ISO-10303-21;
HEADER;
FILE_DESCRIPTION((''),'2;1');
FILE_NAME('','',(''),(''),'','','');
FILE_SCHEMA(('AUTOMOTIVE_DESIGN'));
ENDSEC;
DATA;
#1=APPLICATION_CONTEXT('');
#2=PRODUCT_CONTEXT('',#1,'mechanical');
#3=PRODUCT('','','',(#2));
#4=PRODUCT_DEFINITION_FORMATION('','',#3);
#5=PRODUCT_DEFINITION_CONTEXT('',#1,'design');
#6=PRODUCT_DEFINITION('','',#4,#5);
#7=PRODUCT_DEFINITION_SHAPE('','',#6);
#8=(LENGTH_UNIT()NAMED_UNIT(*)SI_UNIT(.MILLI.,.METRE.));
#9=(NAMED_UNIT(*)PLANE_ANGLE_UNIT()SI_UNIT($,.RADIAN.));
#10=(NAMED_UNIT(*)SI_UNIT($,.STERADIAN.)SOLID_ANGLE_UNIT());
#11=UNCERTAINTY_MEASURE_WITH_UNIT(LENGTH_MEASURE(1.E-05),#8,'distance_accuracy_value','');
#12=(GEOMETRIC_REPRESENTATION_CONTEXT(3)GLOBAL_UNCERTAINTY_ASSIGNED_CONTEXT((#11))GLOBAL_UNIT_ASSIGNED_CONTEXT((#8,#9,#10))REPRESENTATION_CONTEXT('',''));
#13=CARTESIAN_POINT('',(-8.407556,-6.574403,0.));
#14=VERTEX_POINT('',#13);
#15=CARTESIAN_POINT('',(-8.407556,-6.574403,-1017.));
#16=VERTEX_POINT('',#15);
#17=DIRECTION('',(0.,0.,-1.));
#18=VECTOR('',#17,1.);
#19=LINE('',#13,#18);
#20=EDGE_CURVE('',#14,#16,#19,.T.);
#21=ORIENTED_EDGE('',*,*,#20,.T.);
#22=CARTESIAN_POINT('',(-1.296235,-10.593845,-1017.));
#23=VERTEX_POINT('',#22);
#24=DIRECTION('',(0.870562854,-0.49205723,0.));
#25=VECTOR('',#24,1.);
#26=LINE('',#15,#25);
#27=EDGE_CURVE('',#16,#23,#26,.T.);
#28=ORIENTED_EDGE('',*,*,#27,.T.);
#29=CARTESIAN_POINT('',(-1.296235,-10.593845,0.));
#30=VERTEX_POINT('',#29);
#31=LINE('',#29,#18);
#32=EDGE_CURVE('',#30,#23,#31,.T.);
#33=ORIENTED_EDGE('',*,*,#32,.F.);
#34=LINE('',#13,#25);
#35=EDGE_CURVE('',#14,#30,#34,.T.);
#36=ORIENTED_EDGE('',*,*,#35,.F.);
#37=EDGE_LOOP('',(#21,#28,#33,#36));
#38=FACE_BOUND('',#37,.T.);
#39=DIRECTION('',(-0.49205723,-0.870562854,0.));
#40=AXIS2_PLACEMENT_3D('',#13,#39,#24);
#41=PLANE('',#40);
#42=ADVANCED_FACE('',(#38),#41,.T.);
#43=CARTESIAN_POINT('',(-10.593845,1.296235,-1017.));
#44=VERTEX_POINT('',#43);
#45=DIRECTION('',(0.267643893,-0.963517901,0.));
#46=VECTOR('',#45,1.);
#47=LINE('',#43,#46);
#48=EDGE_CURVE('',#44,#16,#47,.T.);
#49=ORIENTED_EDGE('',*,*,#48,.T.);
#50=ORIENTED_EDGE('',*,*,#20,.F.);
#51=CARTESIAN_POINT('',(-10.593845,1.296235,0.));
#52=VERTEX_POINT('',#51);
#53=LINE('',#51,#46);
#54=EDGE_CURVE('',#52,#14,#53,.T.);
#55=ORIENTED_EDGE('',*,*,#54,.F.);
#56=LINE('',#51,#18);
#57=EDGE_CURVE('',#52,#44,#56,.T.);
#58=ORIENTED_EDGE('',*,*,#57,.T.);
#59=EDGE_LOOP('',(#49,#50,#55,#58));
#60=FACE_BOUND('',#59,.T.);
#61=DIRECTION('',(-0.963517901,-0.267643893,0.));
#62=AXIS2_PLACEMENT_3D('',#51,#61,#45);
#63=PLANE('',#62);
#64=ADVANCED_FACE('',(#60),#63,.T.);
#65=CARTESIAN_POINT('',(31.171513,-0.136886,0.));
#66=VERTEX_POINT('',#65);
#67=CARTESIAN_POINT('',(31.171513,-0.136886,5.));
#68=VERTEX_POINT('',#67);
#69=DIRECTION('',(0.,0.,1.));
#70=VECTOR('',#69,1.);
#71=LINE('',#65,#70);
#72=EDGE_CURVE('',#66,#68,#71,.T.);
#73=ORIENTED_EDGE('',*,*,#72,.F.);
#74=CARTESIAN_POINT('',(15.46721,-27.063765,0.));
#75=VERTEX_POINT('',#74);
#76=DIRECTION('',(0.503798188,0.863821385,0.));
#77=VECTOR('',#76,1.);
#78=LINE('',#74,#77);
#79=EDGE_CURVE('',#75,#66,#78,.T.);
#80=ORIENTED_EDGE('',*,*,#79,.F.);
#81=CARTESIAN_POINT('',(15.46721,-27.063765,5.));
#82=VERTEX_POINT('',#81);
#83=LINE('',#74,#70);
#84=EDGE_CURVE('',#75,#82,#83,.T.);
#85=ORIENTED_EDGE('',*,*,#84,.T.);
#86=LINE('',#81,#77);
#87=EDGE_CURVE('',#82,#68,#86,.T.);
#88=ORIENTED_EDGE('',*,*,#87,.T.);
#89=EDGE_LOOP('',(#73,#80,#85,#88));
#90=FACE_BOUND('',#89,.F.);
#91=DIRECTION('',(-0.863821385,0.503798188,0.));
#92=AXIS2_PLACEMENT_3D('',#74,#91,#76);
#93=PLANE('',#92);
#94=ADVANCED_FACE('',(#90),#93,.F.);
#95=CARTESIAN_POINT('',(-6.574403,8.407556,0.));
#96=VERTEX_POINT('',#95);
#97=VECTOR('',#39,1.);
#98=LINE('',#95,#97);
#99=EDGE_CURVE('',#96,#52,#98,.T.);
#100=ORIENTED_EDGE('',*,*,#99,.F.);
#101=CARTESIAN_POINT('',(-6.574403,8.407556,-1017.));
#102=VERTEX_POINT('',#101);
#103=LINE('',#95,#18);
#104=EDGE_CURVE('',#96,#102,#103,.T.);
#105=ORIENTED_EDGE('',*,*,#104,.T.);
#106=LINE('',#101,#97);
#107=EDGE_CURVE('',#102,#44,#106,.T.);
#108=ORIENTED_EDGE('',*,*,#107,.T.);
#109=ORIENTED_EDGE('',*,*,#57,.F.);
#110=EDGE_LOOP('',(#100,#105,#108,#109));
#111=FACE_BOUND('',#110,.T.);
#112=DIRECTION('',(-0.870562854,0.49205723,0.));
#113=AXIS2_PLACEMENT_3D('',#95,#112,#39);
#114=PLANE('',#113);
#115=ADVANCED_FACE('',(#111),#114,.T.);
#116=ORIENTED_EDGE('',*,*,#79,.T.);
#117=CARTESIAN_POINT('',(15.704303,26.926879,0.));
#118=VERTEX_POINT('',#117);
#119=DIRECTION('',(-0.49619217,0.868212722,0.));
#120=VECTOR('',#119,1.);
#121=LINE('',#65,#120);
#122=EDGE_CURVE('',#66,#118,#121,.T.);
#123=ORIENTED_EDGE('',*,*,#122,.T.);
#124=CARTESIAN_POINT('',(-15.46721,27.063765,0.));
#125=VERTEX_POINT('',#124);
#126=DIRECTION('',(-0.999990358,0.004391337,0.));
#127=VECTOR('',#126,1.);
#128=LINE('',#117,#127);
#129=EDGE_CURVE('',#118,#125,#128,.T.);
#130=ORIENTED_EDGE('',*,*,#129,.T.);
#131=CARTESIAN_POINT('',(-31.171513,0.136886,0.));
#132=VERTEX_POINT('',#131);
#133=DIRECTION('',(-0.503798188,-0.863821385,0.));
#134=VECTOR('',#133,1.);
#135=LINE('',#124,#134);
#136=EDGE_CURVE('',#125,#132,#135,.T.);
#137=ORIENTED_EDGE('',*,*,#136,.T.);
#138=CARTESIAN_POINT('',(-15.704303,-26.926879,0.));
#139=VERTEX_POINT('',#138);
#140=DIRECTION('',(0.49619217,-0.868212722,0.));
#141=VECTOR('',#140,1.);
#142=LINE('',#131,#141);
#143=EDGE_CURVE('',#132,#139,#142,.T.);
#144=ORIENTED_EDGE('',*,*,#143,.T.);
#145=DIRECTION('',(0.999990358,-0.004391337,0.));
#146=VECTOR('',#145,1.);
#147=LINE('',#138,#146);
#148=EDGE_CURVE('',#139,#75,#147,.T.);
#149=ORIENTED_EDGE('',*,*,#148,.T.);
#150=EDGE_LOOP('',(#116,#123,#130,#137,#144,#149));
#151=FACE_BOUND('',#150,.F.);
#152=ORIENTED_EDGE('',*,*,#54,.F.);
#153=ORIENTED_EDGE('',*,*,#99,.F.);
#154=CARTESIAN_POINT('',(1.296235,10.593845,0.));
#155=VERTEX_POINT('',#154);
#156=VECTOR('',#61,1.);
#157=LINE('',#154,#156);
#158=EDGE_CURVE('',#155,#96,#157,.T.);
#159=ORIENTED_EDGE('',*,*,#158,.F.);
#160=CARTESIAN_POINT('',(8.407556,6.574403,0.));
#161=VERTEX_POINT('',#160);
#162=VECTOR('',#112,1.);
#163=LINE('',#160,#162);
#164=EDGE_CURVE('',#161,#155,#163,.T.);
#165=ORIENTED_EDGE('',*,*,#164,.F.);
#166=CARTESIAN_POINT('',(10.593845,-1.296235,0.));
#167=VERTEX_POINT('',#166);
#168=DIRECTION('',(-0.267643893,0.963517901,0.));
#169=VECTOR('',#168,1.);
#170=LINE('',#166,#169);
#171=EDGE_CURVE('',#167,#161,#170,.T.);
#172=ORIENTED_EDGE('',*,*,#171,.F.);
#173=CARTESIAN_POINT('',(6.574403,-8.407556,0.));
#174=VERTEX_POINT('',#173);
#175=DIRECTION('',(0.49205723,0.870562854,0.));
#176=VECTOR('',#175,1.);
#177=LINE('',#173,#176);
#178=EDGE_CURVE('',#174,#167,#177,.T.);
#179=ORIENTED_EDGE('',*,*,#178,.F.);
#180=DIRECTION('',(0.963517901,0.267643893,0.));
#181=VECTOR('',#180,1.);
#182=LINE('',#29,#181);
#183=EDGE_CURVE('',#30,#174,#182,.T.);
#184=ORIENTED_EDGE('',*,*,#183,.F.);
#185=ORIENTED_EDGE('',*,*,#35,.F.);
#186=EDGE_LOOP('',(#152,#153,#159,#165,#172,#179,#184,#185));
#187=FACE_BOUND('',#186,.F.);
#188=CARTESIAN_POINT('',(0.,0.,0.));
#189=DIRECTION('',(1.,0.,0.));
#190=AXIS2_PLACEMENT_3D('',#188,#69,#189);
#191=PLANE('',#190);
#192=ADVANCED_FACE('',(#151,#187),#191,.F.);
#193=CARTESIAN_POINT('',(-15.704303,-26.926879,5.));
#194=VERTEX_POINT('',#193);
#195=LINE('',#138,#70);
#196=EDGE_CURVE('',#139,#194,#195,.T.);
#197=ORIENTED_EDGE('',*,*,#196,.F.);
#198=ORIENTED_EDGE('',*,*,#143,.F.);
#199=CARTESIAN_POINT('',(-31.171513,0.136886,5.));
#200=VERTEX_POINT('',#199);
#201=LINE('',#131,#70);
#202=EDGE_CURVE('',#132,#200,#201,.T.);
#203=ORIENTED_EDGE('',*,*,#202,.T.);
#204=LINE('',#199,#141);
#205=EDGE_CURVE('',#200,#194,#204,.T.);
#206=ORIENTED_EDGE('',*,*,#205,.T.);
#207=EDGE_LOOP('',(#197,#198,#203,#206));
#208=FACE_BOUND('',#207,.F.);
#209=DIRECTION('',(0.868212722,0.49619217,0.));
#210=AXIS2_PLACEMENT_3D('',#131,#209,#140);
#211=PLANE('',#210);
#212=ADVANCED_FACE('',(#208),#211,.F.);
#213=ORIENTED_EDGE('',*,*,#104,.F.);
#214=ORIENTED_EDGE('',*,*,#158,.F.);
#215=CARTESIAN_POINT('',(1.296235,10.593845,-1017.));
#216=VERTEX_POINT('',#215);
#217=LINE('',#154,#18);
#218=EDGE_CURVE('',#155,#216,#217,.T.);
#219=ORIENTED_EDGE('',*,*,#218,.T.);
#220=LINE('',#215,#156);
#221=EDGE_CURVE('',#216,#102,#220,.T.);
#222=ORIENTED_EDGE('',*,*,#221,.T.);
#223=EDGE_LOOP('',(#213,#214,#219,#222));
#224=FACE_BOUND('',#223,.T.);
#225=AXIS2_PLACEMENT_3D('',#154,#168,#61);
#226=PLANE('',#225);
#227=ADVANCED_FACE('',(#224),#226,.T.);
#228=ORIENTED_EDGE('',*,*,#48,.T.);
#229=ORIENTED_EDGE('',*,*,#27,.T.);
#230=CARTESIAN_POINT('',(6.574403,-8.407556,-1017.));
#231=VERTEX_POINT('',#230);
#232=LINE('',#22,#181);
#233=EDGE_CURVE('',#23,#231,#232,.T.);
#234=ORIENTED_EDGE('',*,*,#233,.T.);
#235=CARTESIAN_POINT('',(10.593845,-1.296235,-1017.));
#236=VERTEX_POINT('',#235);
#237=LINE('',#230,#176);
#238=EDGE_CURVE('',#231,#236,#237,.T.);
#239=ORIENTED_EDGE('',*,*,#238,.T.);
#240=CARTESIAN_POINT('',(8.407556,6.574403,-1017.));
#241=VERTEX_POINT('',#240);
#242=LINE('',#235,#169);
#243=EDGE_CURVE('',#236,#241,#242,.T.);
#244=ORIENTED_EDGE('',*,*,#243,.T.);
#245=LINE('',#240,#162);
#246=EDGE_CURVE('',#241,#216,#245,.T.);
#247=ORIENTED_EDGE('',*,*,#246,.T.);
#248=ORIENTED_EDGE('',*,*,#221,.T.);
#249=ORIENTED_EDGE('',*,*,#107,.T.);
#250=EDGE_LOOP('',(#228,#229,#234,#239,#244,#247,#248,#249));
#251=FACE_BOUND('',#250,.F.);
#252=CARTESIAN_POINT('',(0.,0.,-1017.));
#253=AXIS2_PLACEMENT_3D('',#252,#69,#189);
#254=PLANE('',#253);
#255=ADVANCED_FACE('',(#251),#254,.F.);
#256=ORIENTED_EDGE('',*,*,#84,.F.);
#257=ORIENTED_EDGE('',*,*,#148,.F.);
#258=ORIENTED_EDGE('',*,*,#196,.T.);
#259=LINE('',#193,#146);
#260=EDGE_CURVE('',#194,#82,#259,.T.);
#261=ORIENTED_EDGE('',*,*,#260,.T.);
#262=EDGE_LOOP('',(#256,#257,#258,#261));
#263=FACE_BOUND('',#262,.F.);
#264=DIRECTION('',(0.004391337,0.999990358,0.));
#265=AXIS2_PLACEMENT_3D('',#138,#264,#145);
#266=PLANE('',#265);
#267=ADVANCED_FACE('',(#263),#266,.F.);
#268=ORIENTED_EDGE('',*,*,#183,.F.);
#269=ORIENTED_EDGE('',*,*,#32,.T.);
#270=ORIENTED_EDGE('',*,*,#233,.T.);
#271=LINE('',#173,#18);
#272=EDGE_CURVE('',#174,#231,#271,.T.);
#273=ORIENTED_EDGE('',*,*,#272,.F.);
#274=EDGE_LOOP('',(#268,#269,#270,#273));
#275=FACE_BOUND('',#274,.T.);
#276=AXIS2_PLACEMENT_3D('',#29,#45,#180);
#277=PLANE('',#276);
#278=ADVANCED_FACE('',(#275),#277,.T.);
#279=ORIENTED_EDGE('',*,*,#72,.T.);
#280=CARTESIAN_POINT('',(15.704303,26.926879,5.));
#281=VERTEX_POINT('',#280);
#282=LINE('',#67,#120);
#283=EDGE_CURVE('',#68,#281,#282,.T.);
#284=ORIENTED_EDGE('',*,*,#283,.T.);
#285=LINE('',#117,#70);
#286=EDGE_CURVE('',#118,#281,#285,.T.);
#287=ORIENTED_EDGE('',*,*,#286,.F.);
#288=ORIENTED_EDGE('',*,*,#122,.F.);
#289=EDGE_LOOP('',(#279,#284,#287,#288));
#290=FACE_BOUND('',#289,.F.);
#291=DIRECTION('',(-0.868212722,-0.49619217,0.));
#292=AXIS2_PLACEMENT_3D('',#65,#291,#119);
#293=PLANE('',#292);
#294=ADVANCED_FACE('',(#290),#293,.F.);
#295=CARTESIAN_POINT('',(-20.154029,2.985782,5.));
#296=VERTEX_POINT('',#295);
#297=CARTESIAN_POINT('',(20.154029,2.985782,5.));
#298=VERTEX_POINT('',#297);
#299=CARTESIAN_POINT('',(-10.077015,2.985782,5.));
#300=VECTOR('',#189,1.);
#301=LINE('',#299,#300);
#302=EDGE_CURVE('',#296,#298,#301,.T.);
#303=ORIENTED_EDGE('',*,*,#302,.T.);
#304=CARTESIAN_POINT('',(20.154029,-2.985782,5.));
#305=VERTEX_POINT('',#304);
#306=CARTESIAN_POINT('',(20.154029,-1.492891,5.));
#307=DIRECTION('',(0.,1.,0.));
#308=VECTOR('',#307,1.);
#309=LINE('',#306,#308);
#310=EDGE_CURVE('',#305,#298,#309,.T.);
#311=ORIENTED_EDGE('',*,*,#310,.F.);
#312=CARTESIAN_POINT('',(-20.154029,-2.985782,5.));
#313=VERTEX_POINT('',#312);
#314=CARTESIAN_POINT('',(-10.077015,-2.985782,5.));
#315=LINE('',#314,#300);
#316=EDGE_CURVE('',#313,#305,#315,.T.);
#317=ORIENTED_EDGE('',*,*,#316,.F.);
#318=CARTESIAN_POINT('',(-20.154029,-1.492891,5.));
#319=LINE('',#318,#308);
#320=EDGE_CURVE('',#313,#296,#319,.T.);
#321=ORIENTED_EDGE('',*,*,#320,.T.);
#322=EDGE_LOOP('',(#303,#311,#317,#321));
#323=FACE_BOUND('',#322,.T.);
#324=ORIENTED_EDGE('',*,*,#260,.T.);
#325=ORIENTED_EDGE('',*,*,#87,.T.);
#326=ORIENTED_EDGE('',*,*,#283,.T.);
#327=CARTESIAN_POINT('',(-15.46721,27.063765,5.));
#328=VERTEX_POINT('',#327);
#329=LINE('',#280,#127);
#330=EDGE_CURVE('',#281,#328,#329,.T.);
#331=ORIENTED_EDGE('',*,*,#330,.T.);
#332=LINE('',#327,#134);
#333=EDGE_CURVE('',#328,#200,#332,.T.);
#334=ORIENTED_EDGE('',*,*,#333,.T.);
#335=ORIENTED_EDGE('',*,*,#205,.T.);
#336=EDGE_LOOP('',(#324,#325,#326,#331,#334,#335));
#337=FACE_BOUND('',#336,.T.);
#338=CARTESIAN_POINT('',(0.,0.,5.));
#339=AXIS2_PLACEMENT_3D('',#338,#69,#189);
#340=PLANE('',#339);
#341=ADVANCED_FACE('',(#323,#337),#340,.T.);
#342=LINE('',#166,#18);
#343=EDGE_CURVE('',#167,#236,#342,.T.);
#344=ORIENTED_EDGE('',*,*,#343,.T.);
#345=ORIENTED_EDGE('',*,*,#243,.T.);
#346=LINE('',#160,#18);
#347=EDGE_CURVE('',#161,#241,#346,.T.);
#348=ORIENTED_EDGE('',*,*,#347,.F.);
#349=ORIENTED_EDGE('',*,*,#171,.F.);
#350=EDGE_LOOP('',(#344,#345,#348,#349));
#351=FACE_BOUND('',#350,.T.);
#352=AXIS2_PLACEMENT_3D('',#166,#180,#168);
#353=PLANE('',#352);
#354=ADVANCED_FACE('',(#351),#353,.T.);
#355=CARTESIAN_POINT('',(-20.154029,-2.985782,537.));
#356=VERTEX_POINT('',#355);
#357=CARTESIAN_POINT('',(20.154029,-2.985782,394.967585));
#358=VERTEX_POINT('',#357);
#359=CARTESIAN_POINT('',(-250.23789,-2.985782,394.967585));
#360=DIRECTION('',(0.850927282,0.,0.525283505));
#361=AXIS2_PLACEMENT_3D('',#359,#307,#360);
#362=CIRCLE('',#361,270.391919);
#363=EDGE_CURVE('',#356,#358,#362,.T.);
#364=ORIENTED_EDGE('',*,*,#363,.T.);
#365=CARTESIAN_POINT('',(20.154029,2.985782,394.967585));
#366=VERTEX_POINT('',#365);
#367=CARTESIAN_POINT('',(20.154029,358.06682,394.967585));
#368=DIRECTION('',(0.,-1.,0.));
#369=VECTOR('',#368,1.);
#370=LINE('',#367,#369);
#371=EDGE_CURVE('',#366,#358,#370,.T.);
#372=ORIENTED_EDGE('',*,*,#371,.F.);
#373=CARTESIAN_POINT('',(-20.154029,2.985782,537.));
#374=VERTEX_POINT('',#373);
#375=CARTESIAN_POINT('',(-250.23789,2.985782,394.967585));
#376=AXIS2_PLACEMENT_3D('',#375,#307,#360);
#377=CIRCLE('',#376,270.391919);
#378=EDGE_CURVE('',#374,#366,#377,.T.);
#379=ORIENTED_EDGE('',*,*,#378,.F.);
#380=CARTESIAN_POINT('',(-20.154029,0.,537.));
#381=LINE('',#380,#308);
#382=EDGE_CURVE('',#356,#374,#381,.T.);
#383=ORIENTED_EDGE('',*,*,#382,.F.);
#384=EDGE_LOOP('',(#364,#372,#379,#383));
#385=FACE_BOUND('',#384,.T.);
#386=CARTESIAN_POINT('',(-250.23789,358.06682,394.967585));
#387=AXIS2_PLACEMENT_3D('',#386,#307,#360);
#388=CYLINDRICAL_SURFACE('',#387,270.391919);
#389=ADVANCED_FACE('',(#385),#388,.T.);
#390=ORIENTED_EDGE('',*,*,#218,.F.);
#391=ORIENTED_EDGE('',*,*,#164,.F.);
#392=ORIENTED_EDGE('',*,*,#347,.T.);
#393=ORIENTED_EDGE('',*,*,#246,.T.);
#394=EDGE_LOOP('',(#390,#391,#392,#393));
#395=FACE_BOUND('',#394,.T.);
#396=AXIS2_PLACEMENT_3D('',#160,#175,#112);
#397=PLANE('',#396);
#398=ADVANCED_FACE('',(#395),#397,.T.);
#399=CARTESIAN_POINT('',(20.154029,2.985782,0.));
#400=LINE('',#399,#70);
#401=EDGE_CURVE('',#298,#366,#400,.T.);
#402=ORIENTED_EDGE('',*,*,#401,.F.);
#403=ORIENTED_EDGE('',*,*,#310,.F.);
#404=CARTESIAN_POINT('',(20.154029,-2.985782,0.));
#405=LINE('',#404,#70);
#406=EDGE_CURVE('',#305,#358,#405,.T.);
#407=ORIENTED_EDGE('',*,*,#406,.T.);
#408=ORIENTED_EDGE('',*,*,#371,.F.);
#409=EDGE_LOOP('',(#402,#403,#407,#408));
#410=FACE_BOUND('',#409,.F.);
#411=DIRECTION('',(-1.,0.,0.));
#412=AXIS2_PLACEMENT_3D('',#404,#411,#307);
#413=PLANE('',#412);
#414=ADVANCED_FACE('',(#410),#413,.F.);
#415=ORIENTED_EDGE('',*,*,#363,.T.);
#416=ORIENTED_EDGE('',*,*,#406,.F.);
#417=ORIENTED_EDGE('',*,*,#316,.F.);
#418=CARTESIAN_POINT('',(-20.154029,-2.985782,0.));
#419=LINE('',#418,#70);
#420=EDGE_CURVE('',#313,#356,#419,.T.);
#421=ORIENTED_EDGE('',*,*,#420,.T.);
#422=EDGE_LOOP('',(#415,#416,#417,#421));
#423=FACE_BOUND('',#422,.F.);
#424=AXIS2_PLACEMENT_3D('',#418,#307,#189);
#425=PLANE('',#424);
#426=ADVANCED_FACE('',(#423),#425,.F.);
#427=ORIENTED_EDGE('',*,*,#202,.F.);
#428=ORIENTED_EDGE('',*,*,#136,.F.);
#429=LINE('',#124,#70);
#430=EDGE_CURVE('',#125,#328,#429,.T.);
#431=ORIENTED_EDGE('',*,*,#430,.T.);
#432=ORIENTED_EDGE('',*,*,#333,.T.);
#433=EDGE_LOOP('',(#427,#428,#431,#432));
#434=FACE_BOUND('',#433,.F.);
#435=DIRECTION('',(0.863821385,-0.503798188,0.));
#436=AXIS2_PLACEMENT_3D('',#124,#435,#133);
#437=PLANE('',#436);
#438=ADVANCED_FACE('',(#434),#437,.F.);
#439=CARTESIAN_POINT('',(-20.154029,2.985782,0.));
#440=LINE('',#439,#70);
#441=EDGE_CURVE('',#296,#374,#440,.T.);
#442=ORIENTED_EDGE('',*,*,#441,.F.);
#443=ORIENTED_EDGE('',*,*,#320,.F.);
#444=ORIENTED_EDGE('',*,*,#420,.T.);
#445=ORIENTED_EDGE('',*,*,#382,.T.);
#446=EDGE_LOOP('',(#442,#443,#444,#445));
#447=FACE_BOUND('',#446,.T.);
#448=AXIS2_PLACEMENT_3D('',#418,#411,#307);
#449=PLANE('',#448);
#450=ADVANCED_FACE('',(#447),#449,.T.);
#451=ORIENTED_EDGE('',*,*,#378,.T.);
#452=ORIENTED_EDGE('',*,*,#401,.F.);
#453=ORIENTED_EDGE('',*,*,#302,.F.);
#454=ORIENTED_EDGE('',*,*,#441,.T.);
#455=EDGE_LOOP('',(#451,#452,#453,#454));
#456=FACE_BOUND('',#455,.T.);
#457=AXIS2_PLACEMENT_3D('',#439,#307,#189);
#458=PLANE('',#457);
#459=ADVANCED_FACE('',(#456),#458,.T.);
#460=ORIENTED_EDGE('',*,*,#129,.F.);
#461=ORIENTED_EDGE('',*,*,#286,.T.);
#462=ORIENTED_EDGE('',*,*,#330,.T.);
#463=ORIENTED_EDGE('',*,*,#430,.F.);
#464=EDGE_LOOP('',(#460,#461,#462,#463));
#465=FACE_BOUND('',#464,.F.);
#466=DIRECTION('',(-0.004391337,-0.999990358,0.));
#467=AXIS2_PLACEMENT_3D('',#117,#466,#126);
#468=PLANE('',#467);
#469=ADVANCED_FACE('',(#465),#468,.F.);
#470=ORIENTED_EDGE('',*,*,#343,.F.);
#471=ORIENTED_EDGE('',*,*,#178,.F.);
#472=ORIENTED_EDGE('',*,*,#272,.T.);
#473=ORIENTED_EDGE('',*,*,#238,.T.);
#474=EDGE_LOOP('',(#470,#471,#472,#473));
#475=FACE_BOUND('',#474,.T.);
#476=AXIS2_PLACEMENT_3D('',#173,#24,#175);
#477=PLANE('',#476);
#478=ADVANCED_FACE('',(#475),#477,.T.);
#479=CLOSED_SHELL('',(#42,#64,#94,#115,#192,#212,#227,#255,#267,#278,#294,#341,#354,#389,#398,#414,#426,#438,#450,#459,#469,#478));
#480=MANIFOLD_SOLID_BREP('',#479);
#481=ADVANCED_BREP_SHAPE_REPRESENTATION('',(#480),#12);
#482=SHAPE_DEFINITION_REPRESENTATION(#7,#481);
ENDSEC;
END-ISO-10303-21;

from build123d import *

# Parameters (mm, degrees)
F0_W        = 40.3080582619
F0_H        = 5.9715644456
F1_DEPTH    = 537
F3_DEPTH    = 1017
F5_DEPTH    = 5
F6_T1_DEPTH = 716.1336390313


# Not quite as in the source:
# - a fillet or chamfer that OpenCascade refuses, or shapes differently, is made with other operations: its cross-section is extruded or revolved along the edge and cut away or added


with BuildPart() as f1:
    # F0 (on Top) → F1 (new body)
    with BuildSketch(Plane.XY):
        Rectangle(F0_W, F0_H)
    extrude(amount=F1_DEPTH)

    # F2 (on Top) → F3 (join)
    with BuildSketch(Plane.XY):
        Polygon((6.5744029718, -8.407556447), (10.5938451005, -1.2962352533), (8.407556447, 6.5744029718), (1.2962352533, 10.5938451005), (-6.5744029718, 8.407556447), (-10.5938451005, 1.2962352533), (-8.407556447, -6.5744029718), (-1.2962352533, -10.5938451005), align=None)
    extrude(amount=-F3_DEPTH)

    # F4 (on Top) → F5 (join)
    with BuildSketch(Plane.XY):
        Polygon((31.1715127681, -0.1368859226), (15.7043030704, 26.9268789703), (-15.4672096977, 27.0637648929), (-31.1715127681, 0.1368859226), (-15.7043030704, -26.9268789703), (15.4672096977, -27.0637648929), align=None)
    extrude(amount=F5_DEPTH)

    # F6: fillet of radius 270.3919189858 on 1 edges, made by hand

    # F6_s2 → F6_t1 (cut)
    with BuildSketch(Plane.XZ.offset(-358.0668195157)):
        with BuildLine():
            ThreePointArc((-20.1540291309, 537), (9.881896476, 468.7882231999), (20.1540291309, 394.9675850829))
            Line((20.1540291309, 394.9675850829), (20.1540291309, 537))
            Line((20.1540291309, 537), (-20.1540291309, 537))
        make_face()
    extrude(amount=F6_T1_DEPTH, mode=Mode.SUBTRACT)


solid = f1.part
